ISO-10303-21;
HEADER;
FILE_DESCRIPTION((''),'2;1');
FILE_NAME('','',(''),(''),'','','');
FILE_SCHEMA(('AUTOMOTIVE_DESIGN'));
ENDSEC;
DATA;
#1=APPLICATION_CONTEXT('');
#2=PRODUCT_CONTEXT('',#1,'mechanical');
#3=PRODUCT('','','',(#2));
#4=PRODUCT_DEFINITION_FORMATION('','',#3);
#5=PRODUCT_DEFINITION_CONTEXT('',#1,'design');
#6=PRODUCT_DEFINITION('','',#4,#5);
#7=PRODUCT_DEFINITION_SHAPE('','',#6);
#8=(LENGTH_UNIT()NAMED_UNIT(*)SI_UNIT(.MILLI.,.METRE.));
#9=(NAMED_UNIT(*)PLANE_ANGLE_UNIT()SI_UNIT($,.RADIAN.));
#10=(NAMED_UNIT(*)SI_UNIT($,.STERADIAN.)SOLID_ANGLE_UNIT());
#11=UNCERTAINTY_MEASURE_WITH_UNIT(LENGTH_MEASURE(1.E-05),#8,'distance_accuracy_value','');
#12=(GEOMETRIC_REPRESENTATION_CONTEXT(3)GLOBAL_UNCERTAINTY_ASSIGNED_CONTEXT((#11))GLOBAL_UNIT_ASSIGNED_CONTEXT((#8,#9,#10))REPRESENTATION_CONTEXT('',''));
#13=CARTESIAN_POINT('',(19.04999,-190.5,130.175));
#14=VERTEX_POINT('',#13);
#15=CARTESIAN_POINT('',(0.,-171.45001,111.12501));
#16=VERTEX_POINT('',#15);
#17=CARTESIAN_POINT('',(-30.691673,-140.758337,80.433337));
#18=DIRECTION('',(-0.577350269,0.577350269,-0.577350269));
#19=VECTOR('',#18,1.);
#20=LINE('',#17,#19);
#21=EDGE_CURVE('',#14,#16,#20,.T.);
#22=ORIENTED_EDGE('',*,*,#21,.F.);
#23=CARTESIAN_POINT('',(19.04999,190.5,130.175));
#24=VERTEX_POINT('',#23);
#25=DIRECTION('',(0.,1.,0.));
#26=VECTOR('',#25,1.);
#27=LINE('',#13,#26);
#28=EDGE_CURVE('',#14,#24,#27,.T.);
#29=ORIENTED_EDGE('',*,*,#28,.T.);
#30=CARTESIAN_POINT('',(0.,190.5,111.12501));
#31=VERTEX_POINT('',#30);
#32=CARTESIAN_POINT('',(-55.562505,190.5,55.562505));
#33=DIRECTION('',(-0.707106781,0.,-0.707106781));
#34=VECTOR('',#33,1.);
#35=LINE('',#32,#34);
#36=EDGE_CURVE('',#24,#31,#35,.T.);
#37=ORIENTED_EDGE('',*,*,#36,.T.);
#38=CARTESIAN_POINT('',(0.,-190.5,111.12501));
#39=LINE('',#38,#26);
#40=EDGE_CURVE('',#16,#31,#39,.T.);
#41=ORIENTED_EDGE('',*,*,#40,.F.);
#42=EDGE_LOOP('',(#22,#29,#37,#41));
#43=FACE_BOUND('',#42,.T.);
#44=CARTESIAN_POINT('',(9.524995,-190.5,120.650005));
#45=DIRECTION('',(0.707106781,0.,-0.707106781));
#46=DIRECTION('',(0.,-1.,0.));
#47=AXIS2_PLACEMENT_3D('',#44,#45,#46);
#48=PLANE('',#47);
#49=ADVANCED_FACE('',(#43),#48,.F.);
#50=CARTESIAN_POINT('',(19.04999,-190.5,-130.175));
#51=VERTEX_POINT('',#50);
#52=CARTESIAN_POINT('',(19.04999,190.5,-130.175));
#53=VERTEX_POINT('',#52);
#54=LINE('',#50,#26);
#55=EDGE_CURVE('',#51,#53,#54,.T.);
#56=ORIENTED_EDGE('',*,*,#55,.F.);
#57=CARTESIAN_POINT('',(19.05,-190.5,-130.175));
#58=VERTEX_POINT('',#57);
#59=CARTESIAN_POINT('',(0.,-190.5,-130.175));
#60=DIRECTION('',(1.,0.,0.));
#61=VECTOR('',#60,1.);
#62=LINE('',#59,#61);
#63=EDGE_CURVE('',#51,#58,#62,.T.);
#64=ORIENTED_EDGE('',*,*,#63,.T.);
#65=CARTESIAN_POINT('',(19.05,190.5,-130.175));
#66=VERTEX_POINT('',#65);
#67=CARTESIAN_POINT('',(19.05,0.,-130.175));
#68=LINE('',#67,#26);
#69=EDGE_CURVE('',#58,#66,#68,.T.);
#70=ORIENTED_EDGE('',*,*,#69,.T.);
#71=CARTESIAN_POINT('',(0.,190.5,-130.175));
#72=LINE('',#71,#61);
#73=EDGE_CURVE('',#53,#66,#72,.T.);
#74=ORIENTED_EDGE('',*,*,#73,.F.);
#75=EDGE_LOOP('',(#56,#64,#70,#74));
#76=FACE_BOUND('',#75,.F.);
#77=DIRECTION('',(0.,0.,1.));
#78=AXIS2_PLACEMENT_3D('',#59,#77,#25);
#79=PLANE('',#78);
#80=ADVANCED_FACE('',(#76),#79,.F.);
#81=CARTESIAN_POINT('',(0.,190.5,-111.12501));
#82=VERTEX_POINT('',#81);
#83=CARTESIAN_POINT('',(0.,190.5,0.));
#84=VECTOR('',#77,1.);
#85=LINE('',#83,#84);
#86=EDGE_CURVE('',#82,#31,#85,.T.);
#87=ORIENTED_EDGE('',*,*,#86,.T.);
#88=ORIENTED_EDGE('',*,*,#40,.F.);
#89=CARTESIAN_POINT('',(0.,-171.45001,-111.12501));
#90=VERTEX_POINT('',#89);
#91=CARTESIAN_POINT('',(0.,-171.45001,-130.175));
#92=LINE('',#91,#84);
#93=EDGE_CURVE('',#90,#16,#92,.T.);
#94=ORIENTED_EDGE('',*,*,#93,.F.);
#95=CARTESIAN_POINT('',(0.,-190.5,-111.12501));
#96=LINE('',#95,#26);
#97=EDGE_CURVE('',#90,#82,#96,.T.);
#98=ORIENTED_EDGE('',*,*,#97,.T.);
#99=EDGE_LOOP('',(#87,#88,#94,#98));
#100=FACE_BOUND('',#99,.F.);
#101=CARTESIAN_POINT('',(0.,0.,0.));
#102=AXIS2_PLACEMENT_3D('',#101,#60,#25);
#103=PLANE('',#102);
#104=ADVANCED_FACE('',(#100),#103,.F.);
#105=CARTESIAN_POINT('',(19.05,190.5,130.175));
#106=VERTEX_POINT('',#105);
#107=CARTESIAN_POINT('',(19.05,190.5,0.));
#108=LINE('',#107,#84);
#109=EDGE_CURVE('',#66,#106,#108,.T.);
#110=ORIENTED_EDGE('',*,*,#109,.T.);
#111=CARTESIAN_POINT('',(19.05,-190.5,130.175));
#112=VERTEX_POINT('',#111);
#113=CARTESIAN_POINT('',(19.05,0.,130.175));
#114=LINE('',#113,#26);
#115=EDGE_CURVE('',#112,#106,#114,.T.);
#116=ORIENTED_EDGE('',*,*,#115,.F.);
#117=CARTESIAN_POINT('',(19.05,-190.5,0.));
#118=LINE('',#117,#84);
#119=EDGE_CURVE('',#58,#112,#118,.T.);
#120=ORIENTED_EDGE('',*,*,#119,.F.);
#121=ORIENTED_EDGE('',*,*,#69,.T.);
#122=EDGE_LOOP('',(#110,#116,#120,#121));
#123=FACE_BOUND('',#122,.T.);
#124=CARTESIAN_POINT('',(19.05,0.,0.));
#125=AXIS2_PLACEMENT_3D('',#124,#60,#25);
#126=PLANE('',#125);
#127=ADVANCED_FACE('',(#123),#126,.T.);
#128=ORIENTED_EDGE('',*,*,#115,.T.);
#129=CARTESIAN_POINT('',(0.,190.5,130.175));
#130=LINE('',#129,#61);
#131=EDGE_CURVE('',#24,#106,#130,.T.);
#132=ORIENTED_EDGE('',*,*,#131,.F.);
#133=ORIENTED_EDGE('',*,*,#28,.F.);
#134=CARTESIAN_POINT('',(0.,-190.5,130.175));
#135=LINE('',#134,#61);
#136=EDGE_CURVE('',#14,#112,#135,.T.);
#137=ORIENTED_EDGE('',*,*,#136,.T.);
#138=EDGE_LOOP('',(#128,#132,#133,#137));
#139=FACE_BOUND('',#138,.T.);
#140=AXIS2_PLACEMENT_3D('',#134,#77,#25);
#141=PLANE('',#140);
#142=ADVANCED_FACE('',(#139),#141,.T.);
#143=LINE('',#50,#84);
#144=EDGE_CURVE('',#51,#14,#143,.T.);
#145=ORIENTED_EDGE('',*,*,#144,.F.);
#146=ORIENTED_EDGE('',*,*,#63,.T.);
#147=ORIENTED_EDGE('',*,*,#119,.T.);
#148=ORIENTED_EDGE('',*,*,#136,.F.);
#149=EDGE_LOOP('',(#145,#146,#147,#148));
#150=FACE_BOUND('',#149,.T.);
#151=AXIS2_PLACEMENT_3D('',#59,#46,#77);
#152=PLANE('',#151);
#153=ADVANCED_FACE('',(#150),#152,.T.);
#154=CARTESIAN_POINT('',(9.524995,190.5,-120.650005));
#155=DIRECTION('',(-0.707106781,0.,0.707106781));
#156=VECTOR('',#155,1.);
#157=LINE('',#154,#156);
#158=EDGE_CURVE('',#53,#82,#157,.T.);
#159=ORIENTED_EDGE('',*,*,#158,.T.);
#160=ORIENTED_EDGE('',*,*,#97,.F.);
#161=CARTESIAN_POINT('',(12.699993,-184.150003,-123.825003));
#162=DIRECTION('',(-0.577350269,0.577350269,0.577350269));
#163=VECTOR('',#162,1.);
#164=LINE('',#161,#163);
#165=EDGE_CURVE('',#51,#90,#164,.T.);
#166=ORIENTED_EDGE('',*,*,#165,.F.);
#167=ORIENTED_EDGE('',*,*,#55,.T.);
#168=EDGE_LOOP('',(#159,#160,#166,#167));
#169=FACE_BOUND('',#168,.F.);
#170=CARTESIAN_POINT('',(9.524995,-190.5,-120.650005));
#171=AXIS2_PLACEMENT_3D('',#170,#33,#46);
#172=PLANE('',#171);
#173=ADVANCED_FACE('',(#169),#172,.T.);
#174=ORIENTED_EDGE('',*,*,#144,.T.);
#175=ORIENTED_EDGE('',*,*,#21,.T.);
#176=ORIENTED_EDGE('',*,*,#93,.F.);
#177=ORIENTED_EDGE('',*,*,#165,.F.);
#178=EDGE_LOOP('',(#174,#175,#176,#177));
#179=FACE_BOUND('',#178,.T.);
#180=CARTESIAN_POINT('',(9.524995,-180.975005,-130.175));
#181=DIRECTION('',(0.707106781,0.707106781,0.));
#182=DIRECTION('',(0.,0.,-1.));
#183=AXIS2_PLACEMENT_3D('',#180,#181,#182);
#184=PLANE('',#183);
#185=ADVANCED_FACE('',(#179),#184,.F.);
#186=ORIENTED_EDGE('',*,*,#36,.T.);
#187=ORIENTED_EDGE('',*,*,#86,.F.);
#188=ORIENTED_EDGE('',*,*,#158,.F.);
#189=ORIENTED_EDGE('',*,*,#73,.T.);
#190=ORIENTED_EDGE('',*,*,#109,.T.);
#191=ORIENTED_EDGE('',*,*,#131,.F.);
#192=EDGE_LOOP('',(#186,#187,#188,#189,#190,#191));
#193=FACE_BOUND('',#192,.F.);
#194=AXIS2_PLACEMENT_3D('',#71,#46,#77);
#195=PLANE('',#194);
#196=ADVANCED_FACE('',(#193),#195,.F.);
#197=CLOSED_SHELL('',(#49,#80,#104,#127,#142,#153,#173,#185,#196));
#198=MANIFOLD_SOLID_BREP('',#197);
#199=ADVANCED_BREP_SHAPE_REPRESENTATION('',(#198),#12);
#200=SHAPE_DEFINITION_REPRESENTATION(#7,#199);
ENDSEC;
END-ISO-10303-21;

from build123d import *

# Parameters (mm, degrees)
F0_W     = 381
F0_H     = 260.35
F1_DEPTH = 19.05
F2_SIZE  = 19.04999


# Not quite as in the source:
# - a fillet or chamfer is up to 0.001 mm smaller than in the source, because OpenCascade refuses the exact size


with BuildPart() as f1:
    # F0 (on Right) → F1 (new body)
    with BuildSketch(Plane.YZ):
        Rectangle(F0_W, F0_H)
    extrude(amount=F1_DEPTH)

    # F2 (size 19.05 in the source; OpenCascade refuses exactly that, so slightly less here)
    f2_edges = [f1.edges().sort_by_distance(p)[0] for p in [
        (0, 0, -130.175),
        (0, 0, 130.175),
        (0, -190.5, 0),
    ]]
    chamfer(f2_edges, length=F2_SIZE)


solid = f1.part
